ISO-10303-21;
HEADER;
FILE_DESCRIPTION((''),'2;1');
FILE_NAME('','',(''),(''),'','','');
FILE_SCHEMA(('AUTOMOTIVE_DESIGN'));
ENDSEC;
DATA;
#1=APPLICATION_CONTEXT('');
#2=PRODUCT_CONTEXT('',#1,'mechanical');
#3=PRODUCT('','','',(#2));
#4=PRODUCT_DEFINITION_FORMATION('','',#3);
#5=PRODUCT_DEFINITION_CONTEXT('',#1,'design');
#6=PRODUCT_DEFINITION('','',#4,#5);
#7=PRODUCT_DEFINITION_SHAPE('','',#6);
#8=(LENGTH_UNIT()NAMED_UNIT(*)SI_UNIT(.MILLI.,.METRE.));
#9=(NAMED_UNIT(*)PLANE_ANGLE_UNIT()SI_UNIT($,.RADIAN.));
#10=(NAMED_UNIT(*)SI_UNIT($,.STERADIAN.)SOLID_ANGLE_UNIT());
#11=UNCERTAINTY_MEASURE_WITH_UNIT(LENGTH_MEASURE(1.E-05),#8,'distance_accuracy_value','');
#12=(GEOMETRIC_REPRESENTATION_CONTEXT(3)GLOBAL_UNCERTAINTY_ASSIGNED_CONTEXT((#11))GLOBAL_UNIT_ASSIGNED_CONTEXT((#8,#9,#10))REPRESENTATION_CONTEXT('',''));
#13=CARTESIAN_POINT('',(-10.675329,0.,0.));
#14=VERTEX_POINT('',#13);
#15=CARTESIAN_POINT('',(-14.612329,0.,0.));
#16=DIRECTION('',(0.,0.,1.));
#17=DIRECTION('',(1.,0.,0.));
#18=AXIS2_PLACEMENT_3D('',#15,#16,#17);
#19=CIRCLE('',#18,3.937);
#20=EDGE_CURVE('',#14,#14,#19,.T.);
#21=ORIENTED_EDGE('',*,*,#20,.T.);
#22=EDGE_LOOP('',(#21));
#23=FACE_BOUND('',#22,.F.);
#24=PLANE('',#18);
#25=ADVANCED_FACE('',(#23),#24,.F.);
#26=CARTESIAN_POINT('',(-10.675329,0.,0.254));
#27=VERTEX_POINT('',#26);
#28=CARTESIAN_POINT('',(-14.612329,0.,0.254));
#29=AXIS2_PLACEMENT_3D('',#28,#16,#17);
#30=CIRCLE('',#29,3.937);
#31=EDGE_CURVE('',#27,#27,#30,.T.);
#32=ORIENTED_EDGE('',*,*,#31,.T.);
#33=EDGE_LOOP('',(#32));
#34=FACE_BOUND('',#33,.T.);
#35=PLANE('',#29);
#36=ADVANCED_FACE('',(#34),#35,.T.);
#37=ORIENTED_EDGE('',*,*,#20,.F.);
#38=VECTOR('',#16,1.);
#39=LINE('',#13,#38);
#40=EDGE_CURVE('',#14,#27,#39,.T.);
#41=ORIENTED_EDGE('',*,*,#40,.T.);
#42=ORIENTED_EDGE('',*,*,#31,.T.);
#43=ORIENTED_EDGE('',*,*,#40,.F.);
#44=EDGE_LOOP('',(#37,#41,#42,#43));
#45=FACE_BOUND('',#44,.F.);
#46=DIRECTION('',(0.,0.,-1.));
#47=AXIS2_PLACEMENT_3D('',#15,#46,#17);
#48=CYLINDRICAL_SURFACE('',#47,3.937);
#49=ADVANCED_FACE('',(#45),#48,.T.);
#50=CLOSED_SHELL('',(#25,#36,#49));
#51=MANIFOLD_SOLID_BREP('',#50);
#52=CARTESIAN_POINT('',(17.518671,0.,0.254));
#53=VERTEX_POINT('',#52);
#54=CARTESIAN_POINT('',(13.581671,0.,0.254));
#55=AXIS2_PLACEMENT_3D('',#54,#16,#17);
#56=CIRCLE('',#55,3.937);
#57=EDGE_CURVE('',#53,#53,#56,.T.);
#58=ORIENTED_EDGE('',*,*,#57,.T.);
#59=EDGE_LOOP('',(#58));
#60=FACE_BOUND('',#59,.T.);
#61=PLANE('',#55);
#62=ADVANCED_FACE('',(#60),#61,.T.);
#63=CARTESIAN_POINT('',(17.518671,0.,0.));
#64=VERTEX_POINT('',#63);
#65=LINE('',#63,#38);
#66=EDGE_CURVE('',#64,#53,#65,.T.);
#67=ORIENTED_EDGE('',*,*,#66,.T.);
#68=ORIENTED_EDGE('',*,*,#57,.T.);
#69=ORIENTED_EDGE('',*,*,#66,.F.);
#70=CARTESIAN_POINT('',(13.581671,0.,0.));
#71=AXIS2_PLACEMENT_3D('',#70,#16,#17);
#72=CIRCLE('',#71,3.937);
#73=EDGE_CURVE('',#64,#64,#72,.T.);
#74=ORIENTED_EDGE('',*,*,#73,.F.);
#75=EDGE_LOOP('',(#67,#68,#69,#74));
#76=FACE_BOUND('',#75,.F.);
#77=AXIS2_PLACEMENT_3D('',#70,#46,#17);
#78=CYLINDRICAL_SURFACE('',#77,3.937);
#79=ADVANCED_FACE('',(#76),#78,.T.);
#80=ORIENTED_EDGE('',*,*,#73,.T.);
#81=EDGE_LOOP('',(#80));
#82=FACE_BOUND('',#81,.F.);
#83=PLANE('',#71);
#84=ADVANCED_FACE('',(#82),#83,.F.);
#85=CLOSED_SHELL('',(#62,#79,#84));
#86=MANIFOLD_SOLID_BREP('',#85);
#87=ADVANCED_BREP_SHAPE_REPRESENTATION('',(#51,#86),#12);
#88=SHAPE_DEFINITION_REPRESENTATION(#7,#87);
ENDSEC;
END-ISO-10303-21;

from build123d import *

# Parameters (mm, degrees)
F0_R     = 3.937
F1_DEPTH = 0.254


# Not quite as in the source:
# - the program builds the solid bodies; features that only make, move or delete a surface that nothing else refers to are left out


with BuildPart() as f1:
    # F0 (on Top) → F1 (new body)
    with BuildSketch(Plane.XY):
        with Locations((-14.6123289031, 0)):
            Circle(F0_R)
    extrude(amount=F1_DEPTH)


with BuildPart() as f1b:
    # F0 (on Top) → F1, piece 2 (new body)
    with BuildSketch(Plane.XY):
        with Locations((13.5816710969, 0)):
            Circle(F0_R)
    extrude(amount=F1_DEPTH)


solid = Compound([f1.part, f1b.part])
